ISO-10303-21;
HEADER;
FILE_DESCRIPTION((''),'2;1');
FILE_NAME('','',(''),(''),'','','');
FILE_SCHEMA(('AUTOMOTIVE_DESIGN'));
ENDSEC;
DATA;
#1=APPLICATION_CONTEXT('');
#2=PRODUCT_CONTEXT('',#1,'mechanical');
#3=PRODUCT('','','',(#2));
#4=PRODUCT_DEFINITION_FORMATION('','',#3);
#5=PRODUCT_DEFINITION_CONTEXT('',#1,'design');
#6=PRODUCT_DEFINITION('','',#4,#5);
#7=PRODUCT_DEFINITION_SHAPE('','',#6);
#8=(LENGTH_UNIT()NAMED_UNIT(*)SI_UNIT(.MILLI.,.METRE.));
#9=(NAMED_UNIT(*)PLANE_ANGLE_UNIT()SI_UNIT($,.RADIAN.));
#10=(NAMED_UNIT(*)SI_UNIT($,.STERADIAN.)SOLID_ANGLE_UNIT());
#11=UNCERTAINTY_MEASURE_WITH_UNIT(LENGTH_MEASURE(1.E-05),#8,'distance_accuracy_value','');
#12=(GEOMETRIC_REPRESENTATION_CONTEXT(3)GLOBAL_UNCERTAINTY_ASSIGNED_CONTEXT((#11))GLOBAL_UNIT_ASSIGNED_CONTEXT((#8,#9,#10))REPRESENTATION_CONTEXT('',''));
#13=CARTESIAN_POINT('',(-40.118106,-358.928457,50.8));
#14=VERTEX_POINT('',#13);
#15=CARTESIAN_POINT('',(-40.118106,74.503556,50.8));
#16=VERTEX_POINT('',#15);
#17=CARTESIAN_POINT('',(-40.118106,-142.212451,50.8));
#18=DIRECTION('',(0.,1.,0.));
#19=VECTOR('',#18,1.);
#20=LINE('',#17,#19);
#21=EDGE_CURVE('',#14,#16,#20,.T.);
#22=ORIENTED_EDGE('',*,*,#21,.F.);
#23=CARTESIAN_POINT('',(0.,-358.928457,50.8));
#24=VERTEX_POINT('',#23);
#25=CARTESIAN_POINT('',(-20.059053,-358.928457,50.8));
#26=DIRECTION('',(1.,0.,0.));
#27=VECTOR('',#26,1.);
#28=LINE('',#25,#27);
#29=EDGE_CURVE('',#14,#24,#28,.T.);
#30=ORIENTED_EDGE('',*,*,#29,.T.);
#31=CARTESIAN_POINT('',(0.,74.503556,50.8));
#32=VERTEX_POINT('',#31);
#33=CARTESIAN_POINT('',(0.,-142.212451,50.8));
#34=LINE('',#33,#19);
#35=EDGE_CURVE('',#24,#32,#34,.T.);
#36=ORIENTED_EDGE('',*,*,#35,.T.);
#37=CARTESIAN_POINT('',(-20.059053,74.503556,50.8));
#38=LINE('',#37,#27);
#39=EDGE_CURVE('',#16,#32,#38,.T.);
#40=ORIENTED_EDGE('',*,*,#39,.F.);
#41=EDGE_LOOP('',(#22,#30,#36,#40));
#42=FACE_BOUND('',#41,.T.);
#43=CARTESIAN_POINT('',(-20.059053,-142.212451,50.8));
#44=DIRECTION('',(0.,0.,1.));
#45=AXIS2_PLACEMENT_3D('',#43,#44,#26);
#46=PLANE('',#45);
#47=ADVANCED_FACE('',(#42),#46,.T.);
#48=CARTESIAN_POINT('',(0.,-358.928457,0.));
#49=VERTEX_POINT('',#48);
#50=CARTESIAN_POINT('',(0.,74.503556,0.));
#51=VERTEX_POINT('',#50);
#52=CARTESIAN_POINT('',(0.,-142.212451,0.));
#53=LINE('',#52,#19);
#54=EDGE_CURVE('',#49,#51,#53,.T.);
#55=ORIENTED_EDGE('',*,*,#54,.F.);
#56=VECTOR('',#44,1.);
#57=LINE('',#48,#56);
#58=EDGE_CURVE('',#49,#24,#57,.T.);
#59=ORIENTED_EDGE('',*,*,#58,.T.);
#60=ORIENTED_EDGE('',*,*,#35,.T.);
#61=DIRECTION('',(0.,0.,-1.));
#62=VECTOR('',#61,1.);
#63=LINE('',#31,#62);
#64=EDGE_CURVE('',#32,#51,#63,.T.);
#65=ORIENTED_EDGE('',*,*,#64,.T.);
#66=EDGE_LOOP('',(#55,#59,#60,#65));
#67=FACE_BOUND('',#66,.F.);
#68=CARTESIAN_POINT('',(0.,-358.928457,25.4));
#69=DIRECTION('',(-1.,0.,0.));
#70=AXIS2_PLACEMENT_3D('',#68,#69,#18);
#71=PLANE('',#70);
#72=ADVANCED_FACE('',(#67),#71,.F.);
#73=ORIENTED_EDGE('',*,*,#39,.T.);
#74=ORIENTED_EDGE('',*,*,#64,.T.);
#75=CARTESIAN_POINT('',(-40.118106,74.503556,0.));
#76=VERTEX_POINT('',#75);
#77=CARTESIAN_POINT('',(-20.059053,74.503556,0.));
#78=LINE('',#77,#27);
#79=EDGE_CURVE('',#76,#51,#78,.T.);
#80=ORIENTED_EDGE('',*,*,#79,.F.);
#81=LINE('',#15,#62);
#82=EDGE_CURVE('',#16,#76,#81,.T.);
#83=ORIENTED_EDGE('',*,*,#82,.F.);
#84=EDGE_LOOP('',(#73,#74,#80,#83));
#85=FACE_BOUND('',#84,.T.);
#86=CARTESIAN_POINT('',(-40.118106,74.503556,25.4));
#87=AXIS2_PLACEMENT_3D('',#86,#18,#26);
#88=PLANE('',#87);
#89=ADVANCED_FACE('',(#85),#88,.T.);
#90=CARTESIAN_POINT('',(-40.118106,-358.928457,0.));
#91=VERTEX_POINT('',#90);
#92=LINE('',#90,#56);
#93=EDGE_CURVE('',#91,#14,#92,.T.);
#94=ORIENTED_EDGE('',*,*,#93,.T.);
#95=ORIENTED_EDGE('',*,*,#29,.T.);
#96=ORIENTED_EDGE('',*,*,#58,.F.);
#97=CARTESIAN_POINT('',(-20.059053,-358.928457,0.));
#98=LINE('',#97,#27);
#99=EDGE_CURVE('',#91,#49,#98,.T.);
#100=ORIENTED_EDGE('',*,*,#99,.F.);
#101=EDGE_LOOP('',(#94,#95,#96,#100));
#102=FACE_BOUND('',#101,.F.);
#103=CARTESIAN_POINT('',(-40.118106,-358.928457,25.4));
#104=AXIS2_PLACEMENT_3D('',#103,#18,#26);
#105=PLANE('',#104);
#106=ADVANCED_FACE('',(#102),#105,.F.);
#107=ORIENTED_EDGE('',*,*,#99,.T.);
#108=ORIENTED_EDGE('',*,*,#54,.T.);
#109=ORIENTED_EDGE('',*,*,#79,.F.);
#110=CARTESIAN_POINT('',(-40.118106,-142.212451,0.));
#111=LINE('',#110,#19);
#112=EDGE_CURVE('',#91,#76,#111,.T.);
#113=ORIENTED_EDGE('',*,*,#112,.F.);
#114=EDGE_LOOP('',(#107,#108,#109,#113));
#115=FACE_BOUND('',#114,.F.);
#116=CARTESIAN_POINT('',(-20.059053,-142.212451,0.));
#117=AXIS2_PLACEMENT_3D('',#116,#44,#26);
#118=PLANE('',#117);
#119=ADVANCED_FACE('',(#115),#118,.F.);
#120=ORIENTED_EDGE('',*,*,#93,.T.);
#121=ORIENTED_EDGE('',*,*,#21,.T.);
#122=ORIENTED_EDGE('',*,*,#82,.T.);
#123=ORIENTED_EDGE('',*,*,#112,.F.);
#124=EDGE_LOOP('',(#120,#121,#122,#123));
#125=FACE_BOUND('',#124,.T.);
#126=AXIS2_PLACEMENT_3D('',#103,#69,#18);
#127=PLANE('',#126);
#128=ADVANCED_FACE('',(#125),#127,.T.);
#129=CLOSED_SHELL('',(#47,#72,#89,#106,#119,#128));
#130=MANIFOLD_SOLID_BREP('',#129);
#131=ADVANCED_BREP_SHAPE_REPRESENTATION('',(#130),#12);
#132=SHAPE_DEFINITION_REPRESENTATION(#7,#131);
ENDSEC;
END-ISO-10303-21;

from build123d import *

# Parameters (mm, degrees)
F0_W     = 40.1181057096
F0_H     = 433.4320127964
F1_DEPTH = 25.4
F2_W     = 40.1181057096
F2_H     = 433.4320127964
F3_DEPTH = 25.4


# Not quite as in the source:
# - the program builds the solid bodies; features that only make, move or delete a surface that nothing else refers to are left out


with BuildPart() as f1:
    # F0 (on Top) → F1 (new body)
    with BuildSketch(Plane.XY):
        with Locations((-20.0590528548, -142.2124505043)):
            Rectangle(F0_W, F0_H)
    extrude(amount=F1_DEPTH)

    # F2 (on face) → F3 (join)
    with BuildSketch(Plane.XY.offset(25.4)):
        with Locations((-20.0590528548, -142.2124505043)):
            Rectangle(F2_W, F2_H)
    extrude(amount=F3_DEPTH)


solid = f1.part
